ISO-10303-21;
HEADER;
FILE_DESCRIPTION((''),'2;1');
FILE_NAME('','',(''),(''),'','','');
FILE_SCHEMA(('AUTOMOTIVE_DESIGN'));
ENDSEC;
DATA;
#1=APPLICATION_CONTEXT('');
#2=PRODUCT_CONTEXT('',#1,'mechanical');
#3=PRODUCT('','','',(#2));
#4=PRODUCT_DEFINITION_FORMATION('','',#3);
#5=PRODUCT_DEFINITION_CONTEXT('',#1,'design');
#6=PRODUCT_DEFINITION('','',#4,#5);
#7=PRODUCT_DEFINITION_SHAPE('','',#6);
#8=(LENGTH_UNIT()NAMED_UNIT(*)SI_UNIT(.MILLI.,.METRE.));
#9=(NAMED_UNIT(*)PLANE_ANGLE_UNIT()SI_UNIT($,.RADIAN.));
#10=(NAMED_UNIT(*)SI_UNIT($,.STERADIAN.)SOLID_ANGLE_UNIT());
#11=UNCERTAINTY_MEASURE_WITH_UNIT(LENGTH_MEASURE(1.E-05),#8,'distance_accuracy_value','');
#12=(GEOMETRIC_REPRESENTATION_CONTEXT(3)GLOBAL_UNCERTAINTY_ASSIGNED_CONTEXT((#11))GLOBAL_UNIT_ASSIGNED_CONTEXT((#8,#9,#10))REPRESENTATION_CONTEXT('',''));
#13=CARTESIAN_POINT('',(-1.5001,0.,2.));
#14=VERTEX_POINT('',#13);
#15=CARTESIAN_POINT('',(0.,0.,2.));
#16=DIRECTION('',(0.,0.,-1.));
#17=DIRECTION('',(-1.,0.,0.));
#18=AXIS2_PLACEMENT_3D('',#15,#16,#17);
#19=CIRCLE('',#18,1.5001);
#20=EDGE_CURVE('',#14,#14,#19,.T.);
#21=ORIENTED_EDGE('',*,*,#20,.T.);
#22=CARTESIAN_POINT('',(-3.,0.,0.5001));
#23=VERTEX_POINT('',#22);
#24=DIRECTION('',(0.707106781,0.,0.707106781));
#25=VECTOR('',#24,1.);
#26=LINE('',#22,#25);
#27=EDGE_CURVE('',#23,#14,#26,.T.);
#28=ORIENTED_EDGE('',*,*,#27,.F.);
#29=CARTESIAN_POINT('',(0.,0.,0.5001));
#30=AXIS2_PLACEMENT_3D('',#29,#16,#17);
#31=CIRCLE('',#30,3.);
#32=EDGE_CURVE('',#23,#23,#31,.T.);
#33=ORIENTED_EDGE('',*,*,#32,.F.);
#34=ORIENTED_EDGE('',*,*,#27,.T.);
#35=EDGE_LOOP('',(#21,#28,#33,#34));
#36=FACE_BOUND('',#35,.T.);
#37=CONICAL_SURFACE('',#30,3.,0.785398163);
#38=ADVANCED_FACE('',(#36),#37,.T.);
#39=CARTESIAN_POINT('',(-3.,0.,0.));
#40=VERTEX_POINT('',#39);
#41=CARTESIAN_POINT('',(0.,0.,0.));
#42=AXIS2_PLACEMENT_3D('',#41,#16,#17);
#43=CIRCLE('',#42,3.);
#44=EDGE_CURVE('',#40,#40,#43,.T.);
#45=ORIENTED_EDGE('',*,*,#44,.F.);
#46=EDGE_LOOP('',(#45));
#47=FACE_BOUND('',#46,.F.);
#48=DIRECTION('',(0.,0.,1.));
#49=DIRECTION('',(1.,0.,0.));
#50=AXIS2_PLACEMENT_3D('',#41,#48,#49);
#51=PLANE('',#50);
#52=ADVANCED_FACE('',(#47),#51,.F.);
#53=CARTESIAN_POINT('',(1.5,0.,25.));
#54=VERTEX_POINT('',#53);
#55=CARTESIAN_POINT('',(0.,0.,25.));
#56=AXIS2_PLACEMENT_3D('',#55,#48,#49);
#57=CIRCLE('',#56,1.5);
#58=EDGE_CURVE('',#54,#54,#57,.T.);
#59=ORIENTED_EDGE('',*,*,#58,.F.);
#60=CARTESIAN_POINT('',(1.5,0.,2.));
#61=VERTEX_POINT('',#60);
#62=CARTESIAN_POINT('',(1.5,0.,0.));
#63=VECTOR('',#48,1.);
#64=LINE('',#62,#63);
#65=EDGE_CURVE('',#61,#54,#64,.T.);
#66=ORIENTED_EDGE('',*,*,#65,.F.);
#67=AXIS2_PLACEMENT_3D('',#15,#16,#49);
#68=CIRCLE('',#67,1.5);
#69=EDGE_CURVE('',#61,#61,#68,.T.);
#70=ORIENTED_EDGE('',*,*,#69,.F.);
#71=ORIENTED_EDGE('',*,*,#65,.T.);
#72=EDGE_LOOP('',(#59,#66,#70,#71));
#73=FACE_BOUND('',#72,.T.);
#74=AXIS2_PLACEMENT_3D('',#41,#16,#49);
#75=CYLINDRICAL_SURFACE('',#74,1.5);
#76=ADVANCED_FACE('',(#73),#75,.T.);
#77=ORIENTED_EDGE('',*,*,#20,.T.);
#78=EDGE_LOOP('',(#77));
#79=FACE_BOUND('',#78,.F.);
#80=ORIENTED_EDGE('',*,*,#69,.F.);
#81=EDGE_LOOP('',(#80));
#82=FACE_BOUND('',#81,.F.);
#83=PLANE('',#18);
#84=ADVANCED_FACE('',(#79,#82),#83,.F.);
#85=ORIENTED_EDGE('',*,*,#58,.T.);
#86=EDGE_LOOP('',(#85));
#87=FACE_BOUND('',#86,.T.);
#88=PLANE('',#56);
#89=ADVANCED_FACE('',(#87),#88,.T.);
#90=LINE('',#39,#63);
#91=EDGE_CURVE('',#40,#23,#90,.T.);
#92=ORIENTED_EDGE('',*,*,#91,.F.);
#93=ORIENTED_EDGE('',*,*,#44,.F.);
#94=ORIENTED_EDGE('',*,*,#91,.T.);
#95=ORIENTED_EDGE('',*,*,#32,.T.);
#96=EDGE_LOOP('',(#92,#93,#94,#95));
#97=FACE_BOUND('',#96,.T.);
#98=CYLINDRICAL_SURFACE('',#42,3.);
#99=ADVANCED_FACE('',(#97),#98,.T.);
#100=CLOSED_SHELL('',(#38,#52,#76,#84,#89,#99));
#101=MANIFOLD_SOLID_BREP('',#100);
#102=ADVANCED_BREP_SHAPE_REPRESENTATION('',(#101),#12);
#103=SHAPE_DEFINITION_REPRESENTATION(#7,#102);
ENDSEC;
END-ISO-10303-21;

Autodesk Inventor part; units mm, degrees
ref_plane "YZ Plane" through (0, 0, 0) normal (1, 0, 0) x (0, 1, 0)
ref_plane "XZ Plane" through (0, 0, 0) normal (0, 1, 0) x (-1, 0, 0)
ref_plane "XY Plane" through (0, 0, 0) normal (0, 0, 1) x (1, 0, 0)
sketch "スケッチ1" plane through (0, 0, 0) normal (0, 0, 1) x (1, 0, 0)
  circle A0 centre (0, 0) radius 1.5
  dimension "d0" = 3
extrude "押し出し1" add sketch "スケッチ1" along normal blind 25
sketch "スケッチ2" plane through (0, 0, 0) normal (0, 0, -1) x (-1, 0, 0)
  circle A0 centre (0, 0) radius 3
  dimension "d3" = 6
extrude "押し出し2" add sketch "スケッチ2" against normal blind 2
thread "ねじ1" size "M3x0.5" class "6g" standard "ANSI Metric M Profile" full length
chamfer "面取り1" distance 1.5 angle 45 1 edges at (3, 0, 2)
properties part number "ネジ皿m3,26" material "鋼、高強度、低合金"
